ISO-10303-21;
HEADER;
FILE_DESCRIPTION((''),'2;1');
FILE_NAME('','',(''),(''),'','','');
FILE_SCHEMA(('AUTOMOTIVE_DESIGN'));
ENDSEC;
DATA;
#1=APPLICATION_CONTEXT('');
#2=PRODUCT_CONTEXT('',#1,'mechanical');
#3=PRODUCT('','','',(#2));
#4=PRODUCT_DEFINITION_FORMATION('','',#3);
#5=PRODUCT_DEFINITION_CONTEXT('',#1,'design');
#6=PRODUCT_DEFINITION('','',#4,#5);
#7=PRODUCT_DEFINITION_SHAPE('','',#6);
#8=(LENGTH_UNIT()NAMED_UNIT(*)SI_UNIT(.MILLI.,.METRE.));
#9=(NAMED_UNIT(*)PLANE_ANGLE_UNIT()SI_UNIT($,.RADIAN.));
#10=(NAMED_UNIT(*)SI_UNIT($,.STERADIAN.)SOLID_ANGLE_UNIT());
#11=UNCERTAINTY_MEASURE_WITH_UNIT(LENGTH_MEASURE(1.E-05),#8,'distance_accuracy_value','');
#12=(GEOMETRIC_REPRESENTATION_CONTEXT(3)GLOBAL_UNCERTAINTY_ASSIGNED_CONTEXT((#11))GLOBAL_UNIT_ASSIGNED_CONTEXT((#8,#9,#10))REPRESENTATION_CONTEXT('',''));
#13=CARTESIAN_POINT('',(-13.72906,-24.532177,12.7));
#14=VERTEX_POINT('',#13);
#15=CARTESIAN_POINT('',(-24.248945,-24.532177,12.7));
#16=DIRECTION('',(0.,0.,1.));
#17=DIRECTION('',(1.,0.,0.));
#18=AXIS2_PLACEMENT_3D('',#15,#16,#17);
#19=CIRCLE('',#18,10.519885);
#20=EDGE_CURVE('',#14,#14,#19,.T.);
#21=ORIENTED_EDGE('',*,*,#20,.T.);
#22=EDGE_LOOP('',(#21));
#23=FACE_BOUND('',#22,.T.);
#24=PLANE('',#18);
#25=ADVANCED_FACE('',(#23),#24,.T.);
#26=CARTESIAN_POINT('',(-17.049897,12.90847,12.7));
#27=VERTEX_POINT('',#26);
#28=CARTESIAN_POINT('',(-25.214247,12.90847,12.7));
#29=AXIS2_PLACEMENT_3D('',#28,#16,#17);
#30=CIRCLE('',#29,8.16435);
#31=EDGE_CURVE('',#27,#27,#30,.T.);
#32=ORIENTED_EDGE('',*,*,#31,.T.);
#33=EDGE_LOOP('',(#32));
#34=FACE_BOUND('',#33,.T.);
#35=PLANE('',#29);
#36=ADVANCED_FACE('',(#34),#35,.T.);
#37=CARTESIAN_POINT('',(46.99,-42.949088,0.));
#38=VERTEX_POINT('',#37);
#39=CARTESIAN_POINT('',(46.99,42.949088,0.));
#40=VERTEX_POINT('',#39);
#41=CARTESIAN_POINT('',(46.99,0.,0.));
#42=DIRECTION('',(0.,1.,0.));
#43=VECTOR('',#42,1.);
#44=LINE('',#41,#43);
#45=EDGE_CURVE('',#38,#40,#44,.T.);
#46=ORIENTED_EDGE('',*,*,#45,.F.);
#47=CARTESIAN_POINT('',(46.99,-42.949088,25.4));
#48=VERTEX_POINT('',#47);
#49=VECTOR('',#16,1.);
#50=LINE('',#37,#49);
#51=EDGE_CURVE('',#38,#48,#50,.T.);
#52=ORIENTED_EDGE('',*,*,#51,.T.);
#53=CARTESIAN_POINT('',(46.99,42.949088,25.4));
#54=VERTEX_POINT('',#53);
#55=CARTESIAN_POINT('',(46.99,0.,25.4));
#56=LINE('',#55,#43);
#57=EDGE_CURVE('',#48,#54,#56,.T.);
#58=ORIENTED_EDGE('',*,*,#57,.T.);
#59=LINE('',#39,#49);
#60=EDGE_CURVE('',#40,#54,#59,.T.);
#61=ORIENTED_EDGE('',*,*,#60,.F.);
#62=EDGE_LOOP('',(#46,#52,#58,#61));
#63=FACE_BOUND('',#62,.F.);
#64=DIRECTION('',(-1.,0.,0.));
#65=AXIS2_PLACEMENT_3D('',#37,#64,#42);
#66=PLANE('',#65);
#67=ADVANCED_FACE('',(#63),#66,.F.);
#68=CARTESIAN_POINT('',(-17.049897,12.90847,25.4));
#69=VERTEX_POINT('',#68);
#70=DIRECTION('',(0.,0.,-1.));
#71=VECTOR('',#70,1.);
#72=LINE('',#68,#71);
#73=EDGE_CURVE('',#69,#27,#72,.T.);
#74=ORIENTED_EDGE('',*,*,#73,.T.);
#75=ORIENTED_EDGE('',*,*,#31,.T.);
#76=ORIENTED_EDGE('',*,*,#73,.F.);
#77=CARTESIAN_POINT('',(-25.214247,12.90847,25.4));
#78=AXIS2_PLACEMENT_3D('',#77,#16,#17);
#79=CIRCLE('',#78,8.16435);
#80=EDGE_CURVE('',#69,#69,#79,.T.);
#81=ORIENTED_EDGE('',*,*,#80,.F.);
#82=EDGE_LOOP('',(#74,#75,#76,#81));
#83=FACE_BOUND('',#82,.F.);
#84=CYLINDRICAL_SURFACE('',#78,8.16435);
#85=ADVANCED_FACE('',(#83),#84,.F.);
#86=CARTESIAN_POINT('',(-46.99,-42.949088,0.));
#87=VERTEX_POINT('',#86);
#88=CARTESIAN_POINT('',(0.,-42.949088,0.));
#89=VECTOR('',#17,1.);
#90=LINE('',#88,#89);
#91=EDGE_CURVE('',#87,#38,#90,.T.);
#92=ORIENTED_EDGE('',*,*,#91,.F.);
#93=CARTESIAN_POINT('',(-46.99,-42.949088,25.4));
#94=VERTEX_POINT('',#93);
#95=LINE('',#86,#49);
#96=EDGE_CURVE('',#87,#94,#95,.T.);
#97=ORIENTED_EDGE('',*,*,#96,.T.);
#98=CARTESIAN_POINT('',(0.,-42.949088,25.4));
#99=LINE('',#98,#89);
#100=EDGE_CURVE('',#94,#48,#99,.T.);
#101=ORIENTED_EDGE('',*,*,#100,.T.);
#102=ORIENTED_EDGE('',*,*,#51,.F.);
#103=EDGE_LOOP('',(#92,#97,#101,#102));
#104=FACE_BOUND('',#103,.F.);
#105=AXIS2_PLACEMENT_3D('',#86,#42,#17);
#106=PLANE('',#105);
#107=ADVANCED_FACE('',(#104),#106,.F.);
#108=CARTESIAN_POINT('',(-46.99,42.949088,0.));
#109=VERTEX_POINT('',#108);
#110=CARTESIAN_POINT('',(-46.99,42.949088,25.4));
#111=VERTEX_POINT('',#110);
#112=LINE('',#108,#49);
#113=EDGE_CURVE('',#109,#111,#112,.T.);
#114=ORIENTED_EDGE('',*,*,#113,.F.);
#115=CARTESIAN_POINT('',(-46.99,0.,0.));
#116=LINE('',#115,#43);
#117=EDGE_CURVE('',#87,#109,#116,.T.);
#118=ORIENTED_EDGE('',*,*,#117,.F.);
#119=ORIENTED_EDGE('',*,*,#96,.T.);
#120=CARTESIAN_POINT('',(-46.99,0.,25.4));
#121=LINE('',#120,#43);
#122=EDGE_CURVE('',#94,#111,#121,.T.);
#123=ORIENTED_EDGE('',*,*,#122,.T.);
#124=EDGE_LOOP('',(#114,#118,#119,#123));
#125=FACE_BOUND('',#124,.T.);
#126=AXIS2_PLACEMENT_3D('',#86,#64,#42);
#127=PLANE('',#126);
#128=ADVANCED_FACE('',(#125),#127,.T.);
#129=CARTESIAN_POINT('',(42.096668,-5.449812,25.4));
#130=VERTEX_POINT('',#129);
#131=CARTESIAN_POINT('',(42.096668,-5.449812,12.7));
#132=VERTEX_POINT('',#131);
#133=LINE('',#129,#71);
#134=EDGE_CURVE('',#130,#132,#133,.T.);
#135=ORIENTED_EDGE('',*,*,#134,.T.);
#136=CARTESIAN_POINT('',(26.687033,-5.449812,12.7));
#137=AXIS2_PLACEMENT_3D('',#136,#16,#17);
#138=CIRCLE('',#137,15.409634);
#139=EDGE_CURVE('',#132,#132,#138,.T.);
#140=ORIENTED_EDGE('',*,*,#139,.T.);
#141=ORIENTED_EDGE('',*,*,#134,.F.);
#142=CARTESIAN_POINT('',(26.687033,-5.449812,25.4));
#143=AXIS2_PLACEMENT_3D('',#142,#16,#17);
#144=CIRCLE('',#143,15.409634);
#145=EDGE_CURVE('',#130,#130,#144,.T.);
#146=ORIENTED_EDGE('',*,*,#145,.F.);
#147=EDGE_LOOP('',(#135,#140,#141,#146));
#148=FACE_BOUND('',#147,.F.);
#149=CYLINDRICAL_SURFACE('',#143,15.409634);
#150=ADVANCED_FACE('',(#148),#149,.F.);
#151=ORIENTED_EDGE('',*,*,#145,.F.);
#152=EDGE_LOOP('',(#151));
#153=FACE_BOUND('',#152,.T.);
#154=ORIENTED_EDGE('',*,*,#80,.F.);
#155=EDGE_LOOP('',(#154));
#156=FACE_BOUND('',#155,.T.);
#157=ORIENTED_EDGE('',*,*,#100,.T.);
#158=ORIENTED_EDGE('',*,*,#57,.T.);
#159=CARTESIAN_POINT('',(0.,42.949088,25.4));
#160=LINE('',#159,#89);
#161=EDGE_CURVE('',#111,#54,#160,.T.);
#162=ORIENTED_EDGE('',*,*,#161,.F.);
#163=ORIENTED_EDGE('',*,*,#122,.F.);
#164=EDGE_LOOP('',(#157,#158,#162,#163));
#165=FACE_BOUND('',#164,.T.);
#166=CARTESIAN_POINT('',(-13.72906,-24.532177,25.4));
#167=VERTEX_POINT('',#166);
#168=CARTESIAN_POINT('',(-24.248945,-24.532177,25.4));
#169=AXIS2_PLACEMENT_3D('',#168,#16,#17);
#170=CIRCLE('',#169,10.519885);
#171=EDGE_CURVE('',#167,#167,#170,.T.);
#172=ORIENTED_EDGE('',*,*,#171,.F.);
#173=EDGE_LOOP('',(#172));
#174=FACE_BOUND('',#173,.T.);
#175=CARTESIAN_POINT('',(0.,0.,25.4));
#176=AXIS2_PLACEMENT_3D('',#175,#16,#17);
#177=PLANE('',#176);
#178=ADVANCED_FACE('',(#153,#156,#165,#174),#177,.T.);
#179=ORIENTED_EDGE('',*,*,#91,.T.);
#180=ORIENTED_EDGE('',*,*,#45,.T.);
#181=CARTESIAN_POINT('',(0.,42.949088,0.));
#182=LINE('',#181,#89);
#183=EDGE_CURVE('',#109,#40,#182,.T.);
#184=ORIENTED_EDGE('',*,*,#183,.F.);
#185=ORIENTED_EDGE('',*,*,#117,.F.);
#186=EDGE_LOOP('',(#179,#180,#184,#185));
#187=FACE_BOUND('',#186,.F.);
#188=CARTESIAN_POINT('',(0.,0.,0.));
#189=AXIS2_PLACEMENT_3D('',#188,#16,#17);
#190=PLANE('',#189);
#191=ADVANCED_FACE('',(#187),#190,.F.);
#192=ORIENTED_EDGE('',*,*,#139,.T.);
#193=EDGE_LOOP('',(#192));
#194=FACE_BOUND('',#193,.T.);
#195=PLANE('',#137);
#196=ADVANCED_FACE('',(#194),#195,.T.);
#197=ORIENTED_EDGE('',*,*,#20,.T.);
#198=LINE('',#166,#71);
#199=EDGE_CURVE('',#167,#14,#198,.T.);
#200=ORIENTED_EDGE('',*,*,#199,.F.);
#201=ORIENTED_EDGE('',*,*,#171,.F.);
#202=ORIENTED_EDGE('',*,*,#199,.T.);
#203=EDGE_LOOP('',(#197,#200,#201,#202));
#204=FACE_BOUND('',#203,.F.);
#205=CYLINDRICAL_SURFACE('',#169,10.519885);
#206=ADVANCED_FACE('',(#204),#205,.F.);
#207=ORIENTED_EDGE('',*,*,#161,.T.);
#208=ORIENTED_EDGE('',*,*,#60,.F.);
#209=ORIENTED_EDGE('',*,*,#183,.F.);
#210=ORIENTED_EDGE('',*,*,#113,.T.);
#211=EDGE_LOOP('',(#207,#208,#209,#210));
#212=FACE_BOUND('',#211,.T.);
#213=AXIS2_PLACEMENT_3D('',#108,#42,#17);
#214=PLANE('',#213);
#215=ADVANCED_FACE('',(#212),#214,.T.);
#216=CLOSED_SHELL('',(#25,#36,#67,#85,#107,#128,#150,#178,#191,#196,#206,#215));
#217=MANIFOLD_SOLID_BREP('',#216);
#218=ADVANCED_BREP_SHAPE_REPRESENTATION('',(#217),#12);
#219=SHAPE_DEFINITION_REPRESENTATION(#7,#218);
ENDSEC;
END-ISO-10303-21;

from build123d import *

# Parameters (mm, degrees)
F0_W     = 93.979999423
F0_H     = 85.8981758356
F1_DEPTH = 25.4
F2_R     = 10.5198846742
F2_R_2   = 8.1643500286
F2_R_3   = 15.4096343481
F3_DEPTH = 12.7


# Not quite as in the source:
# - a feature names something its author has since deleted; it is built from what else it names


with BuildPart() as f1:
    # F0 (on Top) → F1 (new body)
    with BuildSketch(Plane.XY):
        Rectangle(F0_W, F0_H)
    extrude(amount=F1_DEPTH)

    # F2 (on face) → F3 (cut)
    with BuildSketch(Plane.XY.offset(25.4)):
        with Locations((-24.2489445955, -24.5321765542)):
            Circle(F2_R)
        with Locations((-25.2142474055, 12.9084698856)):
            Circle(F2_R_2)
        with Locations((26.6870334744, -5.449811928)):
            Circle(F2_R_3)
    extrude(amount=-F3_DEPTH, mode=Mode.SUBTRACT)


solid = f1.part
